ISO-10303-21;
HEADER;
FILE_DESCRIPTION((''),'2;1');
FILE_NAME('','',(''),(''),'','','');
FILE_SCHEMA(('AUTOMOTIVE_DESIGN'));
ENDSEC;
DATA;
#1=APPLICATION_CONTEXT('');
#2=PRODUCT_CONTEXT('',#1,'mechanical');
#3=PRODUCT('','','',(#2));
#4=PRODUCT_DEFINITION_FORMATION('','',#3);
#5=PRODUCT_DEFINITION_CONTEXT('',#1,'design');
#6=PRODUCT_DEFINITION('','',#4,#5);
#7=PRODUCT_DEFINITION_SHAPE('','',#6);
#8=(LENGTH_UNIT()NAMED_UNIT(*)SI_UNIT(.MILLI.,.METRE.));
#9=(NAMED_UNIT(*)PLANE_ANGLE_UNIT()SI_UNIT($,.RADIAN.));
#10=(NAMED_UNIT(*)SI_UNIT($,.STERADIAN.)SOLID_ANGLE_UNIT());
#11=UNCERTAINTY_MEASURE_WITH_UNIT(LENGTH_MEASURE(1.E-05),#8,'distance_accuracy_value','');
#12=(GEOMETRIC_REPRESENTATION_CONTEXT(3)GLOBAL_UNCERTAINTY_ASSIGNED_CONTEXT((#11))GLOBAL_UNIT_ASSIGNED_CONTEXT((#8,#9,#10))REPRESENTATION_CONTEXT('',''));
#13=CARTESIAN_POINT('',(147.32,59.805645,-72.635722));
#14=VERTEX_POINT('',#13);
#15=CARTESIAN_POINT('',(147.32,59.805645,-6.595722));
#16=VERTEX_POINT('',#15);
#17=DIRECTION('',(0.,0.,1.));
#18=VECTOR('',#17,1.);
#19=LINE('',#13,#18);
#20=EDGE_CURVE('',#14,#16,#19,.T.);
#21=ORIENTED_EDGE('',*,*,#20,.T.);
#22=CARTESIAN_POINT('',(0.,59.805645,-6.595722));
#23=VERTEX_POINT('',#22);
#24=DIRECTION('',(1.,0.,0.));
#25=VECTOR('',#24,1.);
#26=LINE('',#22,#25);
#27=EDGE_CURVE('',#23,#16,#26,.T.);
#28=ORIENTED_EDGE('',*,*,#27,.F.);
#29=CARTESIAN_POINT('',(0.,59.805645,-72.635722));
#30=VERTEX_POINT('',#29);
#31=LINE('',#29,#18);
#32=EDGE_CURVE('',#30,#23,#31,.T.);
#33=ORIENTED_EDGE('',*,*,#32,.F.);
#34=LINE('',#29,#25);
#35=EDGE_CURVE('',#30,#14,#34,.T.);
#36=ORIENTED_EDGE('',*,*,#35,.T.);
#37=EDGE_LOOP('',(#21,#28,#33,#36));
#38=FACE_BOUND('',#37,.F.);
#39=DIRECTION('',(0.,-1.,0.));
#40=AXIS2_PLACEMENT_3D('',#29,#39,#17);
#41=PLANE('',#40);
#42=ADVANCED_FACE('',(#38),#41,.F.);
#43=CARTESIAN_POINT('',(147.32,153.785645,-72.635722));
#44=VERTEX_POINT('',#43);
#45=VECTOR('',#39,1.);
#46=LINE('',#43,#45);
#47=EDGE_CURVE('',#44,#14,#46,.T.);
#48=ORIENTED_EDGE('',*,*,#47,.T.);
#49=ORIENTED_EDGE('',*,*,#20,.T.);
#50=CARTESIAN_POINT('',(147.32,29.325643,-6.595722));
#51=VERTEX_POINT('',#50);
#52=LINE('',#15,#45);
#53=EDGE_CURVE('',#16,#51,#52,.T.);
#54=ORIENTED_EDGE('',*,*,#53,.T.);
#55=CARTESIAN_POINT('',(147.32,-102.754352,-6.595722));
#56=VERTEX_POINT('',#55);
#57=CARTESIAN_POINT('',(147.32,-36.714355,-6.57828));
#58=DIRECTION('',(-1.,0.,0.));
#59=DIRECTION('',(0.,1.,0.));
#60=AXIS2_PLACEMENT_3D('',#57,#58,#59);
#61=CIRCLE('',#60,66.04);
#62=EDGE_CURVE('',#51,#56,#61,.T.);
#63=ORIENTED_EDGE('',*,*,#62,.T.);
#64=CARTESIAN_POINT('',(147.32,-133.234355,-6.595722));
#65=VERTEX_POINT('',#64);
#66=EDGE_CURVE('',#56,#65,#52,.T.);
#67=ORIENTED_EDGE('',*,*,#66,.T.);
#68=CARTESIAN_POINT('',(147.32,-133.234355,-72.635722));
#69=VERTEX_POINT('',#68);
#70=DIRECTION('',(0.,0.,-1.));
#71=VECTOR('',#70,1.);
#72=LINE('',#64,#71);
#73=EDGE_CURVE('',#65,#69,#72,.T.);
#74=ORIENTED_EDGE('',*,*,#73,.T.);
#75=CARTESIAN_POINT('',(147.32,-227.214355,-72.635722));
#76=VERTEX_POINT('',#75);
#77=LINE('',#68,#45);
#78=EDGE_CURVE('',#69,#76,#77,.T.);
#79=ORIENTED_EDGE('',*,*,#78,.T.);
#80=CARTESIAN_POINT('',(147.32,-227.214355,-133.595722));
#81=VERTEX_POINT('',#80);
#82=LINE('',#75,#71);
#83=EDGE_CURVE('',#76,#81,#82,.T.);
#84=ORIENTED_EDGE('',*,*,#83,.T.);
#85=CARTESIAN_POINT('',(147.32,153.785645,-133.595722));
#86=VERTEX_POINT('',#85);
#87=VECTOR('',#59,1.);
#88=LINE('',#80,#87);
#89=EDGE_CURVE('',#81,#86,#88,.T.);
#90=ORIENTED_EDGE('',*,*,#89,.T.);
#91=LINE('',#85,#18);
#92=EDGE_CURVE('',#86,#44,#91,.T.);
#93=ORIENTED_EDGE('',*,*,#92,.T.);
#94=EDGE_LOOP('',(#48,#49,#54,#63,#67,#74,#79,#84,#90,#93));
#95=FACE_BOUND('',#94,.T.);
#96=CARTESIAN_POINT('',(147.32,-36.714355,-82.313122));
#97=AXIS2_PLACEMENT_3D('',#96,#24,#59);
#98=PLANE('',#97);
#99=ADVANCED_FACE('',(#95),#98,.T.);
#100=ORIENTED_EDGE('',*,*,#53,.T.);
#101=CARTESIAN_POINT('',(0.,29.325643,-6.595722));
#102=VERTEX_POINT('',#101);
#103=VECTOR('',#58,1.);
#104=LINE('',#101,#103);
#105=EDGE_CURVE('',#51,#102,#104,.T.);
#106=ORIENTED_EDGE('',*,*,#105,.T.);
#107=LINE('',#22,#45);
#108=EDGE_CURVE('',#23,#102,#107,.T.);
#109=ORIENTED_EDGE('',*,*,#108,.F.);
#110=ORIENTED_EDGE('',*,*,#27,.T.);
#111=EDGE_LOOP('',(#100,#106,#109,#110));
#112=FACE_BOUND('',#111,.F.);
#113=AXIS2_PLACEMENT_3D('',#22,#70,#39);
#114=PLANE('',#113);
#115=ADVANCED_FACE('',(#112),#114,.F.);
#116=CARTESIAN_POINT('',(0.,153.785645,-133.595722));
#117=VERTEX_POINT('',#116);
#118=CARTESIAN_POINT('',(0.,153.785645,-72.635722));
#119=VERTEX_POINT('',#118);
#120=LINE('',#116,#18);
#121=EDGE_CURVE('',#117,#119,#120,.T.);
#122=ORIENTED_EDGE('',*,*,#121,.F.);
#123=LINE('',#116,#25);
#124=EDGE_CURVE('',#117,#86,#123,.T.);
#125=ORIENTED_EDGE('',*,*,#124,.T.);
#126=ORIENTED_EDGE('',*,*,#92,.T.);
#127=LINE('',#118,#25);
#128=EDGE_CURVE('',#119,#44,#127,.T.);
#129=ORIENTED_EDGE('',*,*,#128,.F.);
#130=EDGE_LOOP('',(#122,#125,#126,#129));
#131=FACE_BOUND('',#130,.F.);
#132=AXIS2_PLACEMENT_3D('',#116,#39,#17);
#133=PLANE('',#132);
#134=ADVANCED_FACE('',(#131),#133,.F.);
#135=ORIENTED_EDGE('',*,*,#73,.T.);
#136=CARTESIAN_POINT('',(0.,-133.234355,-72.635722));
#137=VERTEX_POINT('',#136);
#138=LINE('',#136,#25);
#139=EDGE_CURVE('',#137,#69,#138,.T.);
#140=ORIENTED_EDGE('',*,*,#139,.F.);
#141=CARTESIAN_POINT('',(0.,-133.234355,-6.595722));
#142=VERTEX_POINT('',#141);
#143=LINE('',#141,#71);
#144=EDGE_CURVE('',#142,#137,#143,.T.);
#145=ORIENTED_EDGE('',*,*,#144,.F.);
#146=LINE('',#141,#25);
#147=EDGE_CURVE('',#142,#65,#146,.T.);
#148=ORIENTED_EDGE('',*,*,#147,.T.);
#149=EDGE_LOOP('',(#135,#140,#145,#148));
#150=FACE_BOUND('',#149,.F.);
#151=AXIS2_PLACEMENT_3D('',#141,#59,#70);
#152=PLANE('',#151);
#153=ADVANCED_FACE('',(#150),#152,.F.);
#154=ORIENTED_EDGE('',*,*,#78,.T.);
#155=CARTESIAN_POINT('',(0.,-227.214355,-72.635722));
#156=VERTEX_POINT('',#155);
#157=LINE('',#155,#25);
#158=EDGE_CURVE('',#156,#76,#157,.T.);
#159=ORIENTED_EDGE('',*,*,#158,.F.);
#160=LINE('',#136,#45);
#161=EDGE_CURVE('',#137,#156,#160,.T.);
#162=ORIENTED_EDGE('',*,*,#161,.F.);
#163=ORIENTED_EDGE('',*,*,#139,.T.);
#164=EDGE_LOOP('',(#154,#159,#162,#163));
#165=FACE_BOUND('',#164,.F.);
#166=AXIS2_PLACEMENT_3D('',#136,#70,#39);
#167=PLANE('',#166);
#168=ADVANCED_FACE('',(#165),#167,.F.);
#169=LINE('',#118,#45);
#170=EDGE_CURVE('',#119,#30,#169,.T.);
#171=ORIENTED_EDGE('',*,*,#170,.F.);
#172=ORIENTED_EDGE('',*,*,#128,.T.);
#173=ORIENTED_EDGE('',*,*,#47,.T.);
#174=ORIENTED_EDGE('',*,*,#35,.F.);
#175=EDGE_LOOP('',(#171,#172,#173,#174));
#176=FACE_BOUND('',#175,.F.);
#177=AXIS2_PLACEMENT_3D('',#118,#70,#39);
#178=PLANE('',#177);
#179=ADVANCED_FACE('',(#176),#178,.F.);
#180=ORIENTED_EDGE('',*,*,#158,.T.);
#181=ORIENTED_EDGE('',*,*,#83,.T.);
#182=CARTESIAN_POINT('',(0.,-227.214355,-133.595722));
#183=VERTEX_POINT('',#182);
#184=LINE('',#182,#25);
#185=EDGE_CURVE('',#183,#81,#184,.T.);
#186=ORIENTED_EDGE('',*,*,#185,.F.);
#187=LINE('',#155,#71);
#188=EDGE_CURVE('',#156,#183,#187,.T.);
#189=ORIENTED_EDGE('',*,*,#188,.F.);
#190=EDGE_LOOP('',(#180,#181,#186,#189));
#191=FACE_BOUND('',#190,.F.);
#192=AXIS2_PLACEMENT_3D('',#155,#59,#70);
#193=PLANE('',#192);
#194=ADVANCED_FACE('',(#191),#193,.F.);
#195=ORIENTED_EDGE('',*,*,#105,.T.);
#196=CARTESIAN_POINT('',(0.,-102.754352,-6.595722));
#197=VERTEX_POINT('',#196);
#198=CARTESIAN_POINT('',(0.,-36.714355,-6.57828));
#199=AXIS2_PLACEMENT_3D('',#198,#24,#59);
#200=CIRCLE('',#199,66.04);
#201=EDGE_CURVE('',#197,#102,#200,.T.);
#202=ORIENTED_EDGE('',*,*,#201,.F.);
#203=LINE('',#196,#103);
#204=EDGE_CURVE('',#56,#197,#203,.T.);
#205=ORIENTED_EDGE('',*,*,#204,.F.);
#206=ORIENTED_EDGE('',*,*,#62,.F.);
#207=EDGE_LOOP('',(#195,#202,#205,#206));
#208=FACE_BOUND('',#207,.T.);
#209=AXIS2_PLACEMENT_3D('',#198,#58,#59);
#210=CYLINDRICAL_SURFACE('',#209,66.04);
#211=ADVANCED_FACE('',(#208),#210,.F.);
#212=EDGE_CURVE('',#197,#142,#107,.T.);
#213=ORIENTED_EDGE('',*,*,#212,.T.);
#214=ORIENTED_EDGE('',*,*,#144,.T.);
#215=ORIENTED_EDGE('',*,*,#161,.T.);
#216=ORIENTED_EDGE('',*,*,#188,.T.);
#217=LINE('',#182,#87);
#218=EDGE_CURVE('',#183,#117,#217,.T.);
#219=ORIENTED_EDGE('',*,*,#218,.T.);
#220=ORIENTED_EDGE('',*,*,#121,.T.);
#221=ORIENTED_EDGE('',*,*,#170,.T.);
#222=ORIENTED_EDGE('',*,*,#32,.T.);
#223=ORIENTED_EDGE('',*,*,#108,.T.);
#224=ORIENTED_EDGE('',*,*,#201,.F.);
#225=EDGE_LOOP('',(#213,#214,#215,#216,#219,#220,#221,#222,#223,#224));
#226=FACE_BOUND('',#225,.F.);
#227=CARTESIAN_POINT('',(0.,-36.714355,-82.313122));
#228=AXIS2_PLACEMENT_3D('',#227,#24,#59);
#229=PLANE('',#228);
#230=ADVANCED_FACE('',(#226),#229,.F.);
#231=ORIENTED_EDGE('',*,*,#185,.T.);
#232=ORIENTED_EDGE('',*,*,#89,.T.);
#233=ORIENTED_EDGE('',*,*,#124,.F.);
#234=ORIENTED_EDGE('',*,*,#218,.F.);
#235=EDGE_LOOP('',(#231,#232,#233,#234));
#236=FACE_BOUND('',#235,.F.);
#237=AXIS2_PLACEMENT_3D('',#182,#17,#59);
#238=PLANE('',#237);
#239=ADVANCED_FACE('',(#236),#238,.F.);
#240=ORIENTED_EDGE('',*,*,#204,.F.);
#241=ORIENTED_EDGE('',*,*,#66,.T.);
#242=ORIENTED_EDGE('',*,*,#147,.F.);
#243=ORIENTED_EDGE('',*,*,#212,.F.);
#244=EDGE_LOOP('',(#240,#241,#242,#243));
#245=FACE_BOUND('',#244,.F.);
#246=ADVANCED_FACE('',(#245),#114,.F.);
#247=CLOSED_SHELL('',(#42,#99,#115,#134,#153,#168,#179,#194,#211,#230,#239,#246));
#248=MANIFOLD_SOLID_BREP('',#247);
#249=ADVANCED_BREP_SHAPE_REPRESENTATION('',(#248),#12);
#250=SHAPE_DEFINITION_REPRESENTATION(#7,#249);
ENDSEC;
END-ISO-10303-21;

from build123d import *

# Parameters (mm, degrees)
F2_DEPTH = 147.32
F3_DEPTH = 543
F1_R     = 66.04
F4_DEPTH = 147.321


# Not quite as in the source:
# - an extrude ends at something that could not be found from the text; its depth is read off the source's solid


with BuildPart() as f2:
    # F0 (on Right) → F2 (new body)
    with BuildSketch(Plane.YZ):
        Polygon((-227.214354679, -72.635721945), (-227.214354679, -133.595721945), (153.785645321, -133.595721945), (153.785645321, -72.635721945), (59.805645321, -72.635721945), (59.805645321, -6.595721945), (-3.4203693569, -6.595721945), (-97.4624507428, -6.595721945), (-133.234354679, -6.595721945), (-133.234354679, -72.635721945), align=None)
    extrude(amount=F2_DEPTH)

    # F1 (on face) → F3 (cut, through all)
    with BuildSketch(Plane.YZ):
        with BuildLine():
            ThreePointArc((29.3256430177, -6.595721945), (29.3256447452, -6.587001079), (29.325645321, -6.5782802129))
            ThreePointArc((29.325645321, -6.5782802129), (-36.7230755452, 59.4617192113), (-102.7543523758, -6.595721945))
            Line((-102.7543523758, -6.595721945), (-97.4624507428, -6.595721945))
            Line((-97.4624507428, -6.595721945), (-3.4203693569, -6.595721945))
            Line((-3.4203693569, -6.595721945), (29.3256430177, -6.595721945))
        make_face()
    extrude(amount=-F3_DEPTH, mode=Mode.SUBTRACT)

    # F1 (on face) + F2_face (on face) → F4 (cut, through all)
    with BuildSketch(Plane.YZ):
        with Locations((-36.714354679, -6.5782802129)):
            Circle(F1_R)
    with BuildSketch(Plane(origin=(147.32, -36.714354679, -80.6128525046), x_dir=(0, 1, 0), z_dir=(1, 0, 0))):
        Polygon((-190.5, 7.9771305595), (-190.5, -52.9828694405), (190.5, -52.9828694405), (190.5, 7.9771305595), (96.52, 7.9771305595), (96.52, 74.0171305595), (-96.52, 74.0171305595), (-96.52, 7.9771305595), align=None)
    extrude(amount=F4_DEPTH, mode=Mode.SUBTRACT)


solid = f2.part
